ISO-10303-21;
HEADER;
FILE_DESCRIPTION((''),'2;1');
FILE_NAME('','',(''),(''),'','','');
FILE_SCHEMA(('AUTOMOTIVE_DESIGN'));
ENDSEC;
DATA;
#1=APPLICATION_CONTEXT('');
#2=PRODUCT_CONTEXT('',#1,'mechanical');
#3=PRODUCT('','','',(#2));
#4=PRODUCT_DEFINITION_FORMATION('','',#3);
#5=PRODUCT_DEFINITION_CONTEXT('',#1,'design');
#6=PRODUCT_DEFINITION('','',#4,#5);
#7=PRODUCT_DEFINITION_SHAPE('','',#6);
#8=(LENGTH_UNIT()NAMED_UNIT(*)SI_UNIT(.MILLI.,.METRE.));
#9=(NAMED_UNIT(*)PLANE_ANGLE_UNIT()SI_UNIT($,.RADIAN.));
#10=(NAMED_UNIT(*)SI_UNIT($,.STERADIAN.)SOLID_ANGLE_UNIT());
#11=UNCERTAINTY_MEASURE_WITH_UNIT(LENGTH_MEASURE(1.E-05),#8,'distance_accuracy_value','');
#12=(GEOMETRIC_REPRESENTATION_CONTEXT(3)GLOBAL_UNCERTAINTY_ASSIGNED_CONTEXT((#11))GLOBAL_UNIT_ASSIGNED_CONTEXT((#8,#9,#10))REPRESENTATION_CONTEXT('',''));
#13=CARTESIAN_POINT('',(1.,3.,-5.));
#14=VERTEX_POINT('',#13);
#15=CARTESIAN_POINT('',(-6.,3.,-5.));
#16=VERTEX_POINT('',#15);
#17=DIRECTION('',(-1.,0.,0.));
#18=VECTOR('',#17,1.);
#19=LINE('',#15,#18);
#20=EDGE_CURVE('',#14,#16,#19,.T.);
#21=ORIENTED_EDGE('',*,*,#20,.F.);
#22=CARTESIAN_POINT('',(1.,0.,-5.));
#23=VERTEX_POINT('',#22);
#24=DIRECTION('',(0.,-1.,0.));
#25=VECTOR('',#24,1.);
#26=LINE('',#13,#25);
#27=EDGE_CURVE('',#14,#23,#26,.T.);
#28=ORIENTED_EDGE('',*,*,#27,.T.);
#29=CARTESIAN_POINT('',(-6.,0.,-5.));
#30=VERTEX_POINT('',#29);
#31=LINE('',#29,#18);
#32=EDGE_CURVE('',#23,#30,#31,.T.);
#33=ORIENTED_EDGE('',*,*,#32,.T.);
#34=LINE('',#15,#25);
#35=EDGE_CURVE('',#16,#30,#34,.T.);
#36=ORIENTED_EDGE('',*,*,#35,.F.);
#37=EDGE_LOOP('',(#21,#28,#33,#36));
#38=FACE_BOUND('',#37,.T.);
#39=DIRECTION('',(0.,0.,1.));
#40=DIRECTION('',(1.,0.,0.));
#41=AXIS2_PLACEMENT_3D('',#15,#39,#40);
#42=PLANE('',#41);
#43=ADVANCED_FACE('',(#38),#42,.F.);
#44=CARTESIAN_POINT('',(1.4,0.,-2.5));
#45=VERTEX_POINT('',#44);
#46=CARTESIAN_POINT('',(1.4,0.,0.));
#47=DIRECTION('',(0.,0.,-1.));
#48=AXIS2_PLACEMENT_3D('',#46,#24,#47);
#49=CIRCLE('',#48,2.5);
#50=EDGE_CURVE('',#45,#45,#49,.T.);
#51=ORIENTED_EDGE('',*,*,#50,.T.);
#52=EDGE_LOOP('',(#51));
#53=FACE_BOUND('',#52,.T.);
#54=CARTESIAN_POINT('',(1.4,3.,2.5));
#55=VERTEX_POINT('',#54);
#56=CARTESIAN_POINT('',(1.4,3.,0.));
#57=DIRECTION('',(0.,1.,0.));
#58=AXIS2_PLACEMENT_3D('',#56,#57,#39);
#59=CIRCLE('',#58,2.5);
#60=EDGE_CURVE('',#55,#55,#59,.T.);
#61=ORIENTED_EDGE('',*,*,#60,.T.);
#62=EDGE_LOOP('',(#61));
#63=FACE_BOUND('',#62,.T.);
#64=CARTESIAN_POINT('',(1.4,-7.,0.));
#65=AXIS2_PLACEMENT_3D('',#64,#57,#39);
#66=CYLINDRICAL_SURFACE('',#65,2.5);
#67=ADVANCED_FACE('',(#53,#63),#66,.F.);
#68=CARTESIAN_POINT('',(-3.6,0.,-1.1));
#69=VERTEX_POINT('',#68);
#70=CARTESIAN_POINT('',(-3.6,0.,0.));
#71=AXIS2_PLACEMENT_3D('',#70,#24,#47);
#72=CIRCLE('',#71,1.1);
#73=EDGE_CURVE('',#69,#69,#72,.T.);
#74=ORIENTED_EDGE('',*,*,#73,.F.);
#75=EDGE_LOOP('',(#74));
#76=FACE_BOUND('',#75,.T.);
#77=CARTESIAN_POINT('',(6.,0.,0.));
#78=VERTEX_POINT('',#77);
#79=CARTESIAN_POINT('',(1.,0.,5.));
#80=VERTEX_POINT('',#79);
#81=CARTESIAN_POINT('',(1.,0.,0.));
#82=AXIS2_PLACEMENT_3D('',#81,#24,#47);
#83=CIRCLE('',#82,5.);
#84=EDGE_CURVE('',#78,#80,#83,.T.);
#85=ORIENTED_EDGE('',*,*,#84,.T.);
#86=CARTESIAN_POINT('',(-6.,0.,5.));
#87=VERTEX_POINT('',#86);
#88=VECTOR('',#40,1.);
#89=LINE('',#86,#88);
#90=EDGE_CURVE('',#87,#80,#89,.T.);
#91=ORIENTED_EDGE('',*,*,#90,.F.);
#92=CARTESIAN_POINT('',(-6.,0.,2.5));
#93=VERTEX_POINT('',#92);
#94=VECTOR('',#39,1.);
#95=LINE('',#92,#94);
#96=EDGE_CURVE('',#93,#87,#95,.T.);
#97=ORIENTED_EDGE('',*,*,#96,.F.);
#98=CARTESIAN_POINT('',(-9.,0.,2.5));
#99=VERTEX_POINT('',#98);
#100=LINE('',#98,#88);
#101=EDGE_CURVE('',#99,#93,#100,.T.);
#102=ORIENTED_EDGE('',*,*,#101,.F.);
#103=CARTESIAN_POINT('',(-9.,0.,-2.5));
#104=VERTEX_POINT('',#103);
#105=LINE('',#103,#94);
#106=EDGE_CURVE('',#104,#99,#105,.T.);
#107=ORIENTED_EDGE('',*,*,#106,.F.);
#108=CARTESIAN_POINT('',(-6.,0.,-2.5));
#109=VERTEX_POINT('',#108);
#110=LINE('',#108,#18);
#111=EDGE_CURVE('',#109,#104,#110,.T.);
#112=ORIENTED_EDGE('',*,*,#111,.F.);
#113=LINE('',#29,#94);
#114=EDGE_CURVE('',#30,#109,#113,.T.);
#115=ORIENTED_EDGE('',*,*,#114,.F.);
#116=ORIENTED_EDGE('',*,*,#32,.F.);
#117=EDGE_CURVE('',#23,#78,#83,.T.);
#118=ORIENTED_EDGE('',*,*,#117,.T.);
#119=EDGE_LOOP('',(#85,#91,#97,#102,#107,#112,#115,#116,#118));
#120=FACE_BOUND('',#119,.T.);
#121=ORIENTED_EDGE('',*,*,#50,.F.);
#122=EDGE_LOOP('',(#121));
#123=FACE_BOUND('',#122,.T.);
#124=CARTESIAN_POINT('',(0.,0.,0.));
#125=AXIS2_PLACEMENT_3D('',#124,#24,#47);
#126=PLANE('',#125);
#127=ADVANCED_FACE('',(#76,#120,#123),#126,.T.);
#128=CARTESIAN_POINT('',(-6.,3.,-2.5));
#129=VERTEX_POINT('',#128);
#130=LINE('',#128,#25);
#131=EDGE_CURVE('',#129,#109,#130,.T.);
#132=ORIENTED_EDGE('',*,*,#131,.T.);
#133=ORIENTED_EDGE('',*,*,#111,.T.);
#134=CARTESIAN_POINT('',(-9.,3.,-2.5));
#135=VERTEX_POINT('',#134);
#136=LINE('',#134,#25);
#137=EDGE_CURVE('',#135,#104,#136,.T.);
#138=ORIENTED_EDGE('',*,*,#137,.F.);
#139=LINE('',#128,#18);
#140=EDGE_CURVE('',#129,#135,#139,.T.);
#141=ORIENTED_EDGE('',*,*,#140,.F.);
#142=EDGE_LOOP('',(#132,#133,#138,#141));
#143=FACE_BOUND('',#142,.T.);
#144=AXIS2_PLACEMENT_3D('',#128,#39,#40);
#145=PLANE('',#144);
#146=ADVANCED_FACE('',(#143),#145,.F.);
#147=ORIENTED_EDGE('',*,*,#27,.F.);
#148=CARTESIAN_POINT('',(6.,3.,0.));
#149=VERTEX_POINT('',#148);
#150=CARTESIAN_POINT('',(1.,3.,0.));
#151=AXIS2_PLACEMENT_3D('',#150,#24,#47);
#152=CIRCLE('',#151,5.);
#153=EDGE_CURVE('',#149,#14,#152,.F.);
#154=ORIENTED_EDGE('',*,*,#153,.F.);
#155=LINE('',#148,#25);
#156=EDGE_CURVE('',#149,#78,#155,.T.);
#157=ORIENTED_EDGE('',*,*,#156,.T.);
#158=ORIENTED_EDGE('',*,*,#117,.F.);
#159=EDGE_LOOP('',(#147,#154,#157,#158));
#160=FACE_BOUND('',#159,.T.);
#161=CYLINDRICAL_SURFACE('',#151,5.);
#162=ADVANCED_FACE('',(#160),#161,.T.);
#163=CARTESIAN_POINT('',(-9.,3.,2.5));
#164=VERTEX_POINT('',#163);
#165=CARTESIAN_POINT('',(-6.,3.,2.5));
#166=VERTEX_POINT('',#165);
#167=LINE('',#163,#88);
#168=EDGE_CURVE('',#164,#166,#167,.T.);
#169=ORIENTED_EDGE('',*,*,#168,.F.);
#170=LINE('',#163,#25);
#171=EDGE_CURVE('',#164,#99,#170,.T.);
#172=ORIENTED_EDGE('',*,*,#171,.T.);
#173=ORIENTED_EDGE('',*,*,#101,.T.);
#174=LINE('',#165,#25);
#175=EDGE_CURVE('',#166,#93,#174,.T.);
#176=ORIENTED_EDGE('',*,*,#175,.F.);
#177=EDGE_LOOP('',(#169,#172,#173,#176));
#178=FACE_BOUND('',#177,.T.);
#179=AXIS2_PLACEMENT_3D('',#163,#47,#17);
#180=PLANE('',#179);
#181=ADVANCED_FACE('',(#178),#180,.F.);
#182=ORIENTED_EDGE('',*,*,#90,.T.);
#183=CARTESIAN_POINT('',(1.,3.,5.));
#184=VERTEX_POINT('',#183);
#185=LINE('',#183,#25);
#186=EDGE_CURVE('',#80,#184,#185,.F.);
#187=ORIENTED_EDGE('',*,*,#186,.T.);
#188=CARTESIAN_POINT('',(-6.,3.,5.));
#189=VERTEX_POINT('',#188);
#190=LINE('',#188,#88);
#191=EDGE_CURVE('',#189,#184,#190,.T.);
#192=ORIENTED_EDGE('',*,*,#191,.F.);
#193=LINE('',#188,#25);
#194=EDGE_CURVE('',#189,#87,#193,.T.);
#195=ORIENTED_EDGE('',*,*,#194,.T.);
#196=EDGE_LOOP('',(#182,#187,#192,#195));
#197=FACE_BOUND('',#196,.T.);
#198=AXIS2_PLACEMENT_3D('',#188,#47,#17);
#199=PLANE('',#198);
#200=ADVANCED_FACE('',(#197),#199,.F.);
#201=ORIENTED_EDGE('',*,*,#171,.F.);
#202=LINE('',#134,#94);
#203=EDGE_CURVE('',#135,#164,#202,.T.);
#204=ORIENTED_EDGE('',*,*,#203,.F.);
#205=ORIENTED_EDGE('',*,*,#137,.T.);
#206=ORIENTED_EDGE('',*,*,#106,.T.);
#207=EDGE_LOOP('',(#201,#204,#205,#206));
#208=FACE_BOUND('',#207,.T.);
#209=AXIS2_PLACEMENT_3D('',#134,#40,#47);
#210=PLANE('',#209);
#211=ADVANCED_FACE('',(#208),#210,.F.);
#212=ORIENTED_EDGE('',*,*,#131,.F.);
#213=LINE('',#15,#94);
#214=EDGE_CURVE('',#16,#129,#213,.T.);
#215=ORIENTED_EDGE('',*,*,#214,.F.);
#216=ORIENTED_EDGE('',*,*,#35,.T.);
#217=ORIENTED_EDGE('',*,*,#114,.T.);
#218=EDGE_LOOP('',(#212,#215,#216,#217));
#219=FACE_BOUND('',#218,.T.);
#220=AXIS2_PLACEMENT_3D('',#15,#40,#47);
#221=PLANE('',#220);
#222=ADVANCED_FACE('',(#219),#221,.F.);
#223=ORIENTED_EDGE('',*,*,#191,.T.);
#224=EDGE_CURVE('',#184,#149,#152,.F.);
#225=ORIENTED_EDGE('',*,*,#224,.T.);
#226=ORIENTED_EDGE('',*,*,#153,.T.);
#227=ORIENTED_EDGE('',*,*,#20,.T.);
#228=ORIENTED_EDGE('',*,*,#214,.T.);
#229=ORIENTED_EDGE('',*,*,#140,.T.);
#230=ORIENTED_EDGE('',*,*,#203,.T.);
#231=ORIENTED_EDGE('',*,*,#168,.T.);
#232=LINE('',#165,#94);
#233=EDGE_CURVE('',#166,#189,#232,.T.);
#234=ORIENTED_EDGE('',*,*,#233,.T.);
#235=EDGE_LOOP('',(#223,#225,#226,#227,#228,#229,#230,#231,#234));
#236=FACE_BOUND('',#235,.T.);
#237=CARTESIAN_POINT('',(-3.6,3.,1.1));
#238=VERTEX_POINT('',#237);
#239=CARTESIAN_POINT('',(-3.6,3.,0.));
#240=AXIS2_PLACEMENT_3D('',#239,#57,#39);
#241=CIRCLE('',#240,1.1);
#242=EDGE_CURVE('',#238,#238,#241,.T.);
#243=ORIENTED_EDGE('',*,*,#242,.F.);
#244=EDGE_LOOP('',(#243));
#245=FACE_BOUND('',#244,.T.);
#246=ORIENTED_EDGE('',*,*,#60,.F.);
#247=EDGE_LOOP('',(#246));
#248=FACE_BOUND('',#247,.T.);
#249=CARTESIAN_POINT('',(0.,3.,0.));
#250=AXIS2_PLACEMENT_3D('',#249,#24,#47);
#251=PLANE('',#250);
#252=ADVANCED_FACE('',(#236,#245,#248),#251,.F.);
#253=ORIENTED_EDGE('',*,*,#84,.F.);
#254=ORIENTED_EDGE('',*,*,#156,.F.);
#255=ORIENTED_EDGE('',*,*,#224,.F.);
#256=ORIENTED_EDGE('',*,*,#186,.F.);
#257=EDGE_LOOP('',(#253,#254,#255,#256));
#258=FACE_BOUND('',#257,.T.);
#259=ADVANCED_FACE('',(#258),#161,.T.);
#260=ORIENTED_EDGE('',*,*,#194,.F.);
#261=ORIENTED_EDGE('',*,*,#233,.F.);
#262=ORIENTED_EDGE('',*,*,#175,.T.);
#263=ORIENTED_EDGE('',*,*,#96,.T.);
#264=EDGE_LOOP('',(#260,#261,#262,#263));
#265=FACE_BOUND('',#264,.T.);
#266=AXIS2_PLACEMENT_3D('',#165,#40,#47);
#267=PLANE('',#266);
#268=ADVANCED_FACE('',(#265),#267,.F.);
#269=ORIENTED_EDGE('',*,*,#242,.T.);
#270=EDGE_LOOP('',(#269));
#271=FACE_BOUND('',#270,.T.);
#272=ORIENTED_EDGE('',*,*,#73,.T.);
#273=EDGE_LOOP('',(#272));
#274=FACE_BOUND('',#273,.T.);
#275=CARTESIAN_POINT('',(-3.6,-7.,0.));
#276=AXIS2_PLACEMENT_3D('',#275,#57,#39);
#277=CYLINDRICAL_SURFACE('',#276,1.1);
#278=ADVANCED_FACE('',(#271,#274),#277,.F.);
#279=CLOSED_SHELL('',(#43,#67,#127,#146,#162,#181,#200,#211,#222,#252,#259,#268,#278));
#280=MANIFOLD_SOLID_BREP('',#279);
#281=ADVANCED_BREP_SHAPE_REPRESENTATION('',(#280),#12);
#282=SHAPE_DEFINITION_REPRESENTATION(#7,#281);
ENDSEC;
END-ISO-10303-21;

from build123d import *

# Parameters (mm, degrees)
SALIENTE_EXTRUIR1_DEPTH = 3
CROQUIS2_R              = 2.5
CROQUIS2_R_2            = 1.1
CORTAR_EXTRUIR1_DEPTH   = 10
REDONDEO1_R             = 5


with BuildPart() as part:
    # Croquis1 → Saliente-Extruir1 (new body)
    with BuildSketch(Plane(origin=(0, 0, 0), x_dir=(1, 0, 0), z_dir=(0, 1, 0))):
        Polygon((-6, 5), (-6, 2.5), (-9, 2.5), (-9, -2.5), (-6, -2.5), (-6, -5), (6, -5), (6, 5), align=None)
    extrude(amount=SALIENTE_EXTRUIR1_DEPTH)

    # Croquis2 → Cortar-Extruir1 (cut)
    with BuildSketch(Plane(origin=(0, 3, 0), x_dir=(1, 0, 0), z_dir=(0, 1, 0))):
        with Locations(Location((1.4, 0, 0), (0, 0, 270))):
            Circle(CROQUIS2_R)
        with Locations(Location((-3.6, 0, 0), (0, 0, 270))):
            Circle(CROQUIS2_R_2)
    extrude(amount=-CORTAR_EXTRUIR1_DEPTH, mode=Mode.SUBTRACT)

    # Redondeo1
    redondeo1_edges = [part.edges().sort_by_distance(p)[0] for p in [
        (6, 1.5, -5),
        (6, 1.5, 5),
    ]]
    fillet(redondeo1_edges, radius=REDONDEO1_R - 0.0001)  # a hair under: the kernel refuses the full size


solid = part.part
